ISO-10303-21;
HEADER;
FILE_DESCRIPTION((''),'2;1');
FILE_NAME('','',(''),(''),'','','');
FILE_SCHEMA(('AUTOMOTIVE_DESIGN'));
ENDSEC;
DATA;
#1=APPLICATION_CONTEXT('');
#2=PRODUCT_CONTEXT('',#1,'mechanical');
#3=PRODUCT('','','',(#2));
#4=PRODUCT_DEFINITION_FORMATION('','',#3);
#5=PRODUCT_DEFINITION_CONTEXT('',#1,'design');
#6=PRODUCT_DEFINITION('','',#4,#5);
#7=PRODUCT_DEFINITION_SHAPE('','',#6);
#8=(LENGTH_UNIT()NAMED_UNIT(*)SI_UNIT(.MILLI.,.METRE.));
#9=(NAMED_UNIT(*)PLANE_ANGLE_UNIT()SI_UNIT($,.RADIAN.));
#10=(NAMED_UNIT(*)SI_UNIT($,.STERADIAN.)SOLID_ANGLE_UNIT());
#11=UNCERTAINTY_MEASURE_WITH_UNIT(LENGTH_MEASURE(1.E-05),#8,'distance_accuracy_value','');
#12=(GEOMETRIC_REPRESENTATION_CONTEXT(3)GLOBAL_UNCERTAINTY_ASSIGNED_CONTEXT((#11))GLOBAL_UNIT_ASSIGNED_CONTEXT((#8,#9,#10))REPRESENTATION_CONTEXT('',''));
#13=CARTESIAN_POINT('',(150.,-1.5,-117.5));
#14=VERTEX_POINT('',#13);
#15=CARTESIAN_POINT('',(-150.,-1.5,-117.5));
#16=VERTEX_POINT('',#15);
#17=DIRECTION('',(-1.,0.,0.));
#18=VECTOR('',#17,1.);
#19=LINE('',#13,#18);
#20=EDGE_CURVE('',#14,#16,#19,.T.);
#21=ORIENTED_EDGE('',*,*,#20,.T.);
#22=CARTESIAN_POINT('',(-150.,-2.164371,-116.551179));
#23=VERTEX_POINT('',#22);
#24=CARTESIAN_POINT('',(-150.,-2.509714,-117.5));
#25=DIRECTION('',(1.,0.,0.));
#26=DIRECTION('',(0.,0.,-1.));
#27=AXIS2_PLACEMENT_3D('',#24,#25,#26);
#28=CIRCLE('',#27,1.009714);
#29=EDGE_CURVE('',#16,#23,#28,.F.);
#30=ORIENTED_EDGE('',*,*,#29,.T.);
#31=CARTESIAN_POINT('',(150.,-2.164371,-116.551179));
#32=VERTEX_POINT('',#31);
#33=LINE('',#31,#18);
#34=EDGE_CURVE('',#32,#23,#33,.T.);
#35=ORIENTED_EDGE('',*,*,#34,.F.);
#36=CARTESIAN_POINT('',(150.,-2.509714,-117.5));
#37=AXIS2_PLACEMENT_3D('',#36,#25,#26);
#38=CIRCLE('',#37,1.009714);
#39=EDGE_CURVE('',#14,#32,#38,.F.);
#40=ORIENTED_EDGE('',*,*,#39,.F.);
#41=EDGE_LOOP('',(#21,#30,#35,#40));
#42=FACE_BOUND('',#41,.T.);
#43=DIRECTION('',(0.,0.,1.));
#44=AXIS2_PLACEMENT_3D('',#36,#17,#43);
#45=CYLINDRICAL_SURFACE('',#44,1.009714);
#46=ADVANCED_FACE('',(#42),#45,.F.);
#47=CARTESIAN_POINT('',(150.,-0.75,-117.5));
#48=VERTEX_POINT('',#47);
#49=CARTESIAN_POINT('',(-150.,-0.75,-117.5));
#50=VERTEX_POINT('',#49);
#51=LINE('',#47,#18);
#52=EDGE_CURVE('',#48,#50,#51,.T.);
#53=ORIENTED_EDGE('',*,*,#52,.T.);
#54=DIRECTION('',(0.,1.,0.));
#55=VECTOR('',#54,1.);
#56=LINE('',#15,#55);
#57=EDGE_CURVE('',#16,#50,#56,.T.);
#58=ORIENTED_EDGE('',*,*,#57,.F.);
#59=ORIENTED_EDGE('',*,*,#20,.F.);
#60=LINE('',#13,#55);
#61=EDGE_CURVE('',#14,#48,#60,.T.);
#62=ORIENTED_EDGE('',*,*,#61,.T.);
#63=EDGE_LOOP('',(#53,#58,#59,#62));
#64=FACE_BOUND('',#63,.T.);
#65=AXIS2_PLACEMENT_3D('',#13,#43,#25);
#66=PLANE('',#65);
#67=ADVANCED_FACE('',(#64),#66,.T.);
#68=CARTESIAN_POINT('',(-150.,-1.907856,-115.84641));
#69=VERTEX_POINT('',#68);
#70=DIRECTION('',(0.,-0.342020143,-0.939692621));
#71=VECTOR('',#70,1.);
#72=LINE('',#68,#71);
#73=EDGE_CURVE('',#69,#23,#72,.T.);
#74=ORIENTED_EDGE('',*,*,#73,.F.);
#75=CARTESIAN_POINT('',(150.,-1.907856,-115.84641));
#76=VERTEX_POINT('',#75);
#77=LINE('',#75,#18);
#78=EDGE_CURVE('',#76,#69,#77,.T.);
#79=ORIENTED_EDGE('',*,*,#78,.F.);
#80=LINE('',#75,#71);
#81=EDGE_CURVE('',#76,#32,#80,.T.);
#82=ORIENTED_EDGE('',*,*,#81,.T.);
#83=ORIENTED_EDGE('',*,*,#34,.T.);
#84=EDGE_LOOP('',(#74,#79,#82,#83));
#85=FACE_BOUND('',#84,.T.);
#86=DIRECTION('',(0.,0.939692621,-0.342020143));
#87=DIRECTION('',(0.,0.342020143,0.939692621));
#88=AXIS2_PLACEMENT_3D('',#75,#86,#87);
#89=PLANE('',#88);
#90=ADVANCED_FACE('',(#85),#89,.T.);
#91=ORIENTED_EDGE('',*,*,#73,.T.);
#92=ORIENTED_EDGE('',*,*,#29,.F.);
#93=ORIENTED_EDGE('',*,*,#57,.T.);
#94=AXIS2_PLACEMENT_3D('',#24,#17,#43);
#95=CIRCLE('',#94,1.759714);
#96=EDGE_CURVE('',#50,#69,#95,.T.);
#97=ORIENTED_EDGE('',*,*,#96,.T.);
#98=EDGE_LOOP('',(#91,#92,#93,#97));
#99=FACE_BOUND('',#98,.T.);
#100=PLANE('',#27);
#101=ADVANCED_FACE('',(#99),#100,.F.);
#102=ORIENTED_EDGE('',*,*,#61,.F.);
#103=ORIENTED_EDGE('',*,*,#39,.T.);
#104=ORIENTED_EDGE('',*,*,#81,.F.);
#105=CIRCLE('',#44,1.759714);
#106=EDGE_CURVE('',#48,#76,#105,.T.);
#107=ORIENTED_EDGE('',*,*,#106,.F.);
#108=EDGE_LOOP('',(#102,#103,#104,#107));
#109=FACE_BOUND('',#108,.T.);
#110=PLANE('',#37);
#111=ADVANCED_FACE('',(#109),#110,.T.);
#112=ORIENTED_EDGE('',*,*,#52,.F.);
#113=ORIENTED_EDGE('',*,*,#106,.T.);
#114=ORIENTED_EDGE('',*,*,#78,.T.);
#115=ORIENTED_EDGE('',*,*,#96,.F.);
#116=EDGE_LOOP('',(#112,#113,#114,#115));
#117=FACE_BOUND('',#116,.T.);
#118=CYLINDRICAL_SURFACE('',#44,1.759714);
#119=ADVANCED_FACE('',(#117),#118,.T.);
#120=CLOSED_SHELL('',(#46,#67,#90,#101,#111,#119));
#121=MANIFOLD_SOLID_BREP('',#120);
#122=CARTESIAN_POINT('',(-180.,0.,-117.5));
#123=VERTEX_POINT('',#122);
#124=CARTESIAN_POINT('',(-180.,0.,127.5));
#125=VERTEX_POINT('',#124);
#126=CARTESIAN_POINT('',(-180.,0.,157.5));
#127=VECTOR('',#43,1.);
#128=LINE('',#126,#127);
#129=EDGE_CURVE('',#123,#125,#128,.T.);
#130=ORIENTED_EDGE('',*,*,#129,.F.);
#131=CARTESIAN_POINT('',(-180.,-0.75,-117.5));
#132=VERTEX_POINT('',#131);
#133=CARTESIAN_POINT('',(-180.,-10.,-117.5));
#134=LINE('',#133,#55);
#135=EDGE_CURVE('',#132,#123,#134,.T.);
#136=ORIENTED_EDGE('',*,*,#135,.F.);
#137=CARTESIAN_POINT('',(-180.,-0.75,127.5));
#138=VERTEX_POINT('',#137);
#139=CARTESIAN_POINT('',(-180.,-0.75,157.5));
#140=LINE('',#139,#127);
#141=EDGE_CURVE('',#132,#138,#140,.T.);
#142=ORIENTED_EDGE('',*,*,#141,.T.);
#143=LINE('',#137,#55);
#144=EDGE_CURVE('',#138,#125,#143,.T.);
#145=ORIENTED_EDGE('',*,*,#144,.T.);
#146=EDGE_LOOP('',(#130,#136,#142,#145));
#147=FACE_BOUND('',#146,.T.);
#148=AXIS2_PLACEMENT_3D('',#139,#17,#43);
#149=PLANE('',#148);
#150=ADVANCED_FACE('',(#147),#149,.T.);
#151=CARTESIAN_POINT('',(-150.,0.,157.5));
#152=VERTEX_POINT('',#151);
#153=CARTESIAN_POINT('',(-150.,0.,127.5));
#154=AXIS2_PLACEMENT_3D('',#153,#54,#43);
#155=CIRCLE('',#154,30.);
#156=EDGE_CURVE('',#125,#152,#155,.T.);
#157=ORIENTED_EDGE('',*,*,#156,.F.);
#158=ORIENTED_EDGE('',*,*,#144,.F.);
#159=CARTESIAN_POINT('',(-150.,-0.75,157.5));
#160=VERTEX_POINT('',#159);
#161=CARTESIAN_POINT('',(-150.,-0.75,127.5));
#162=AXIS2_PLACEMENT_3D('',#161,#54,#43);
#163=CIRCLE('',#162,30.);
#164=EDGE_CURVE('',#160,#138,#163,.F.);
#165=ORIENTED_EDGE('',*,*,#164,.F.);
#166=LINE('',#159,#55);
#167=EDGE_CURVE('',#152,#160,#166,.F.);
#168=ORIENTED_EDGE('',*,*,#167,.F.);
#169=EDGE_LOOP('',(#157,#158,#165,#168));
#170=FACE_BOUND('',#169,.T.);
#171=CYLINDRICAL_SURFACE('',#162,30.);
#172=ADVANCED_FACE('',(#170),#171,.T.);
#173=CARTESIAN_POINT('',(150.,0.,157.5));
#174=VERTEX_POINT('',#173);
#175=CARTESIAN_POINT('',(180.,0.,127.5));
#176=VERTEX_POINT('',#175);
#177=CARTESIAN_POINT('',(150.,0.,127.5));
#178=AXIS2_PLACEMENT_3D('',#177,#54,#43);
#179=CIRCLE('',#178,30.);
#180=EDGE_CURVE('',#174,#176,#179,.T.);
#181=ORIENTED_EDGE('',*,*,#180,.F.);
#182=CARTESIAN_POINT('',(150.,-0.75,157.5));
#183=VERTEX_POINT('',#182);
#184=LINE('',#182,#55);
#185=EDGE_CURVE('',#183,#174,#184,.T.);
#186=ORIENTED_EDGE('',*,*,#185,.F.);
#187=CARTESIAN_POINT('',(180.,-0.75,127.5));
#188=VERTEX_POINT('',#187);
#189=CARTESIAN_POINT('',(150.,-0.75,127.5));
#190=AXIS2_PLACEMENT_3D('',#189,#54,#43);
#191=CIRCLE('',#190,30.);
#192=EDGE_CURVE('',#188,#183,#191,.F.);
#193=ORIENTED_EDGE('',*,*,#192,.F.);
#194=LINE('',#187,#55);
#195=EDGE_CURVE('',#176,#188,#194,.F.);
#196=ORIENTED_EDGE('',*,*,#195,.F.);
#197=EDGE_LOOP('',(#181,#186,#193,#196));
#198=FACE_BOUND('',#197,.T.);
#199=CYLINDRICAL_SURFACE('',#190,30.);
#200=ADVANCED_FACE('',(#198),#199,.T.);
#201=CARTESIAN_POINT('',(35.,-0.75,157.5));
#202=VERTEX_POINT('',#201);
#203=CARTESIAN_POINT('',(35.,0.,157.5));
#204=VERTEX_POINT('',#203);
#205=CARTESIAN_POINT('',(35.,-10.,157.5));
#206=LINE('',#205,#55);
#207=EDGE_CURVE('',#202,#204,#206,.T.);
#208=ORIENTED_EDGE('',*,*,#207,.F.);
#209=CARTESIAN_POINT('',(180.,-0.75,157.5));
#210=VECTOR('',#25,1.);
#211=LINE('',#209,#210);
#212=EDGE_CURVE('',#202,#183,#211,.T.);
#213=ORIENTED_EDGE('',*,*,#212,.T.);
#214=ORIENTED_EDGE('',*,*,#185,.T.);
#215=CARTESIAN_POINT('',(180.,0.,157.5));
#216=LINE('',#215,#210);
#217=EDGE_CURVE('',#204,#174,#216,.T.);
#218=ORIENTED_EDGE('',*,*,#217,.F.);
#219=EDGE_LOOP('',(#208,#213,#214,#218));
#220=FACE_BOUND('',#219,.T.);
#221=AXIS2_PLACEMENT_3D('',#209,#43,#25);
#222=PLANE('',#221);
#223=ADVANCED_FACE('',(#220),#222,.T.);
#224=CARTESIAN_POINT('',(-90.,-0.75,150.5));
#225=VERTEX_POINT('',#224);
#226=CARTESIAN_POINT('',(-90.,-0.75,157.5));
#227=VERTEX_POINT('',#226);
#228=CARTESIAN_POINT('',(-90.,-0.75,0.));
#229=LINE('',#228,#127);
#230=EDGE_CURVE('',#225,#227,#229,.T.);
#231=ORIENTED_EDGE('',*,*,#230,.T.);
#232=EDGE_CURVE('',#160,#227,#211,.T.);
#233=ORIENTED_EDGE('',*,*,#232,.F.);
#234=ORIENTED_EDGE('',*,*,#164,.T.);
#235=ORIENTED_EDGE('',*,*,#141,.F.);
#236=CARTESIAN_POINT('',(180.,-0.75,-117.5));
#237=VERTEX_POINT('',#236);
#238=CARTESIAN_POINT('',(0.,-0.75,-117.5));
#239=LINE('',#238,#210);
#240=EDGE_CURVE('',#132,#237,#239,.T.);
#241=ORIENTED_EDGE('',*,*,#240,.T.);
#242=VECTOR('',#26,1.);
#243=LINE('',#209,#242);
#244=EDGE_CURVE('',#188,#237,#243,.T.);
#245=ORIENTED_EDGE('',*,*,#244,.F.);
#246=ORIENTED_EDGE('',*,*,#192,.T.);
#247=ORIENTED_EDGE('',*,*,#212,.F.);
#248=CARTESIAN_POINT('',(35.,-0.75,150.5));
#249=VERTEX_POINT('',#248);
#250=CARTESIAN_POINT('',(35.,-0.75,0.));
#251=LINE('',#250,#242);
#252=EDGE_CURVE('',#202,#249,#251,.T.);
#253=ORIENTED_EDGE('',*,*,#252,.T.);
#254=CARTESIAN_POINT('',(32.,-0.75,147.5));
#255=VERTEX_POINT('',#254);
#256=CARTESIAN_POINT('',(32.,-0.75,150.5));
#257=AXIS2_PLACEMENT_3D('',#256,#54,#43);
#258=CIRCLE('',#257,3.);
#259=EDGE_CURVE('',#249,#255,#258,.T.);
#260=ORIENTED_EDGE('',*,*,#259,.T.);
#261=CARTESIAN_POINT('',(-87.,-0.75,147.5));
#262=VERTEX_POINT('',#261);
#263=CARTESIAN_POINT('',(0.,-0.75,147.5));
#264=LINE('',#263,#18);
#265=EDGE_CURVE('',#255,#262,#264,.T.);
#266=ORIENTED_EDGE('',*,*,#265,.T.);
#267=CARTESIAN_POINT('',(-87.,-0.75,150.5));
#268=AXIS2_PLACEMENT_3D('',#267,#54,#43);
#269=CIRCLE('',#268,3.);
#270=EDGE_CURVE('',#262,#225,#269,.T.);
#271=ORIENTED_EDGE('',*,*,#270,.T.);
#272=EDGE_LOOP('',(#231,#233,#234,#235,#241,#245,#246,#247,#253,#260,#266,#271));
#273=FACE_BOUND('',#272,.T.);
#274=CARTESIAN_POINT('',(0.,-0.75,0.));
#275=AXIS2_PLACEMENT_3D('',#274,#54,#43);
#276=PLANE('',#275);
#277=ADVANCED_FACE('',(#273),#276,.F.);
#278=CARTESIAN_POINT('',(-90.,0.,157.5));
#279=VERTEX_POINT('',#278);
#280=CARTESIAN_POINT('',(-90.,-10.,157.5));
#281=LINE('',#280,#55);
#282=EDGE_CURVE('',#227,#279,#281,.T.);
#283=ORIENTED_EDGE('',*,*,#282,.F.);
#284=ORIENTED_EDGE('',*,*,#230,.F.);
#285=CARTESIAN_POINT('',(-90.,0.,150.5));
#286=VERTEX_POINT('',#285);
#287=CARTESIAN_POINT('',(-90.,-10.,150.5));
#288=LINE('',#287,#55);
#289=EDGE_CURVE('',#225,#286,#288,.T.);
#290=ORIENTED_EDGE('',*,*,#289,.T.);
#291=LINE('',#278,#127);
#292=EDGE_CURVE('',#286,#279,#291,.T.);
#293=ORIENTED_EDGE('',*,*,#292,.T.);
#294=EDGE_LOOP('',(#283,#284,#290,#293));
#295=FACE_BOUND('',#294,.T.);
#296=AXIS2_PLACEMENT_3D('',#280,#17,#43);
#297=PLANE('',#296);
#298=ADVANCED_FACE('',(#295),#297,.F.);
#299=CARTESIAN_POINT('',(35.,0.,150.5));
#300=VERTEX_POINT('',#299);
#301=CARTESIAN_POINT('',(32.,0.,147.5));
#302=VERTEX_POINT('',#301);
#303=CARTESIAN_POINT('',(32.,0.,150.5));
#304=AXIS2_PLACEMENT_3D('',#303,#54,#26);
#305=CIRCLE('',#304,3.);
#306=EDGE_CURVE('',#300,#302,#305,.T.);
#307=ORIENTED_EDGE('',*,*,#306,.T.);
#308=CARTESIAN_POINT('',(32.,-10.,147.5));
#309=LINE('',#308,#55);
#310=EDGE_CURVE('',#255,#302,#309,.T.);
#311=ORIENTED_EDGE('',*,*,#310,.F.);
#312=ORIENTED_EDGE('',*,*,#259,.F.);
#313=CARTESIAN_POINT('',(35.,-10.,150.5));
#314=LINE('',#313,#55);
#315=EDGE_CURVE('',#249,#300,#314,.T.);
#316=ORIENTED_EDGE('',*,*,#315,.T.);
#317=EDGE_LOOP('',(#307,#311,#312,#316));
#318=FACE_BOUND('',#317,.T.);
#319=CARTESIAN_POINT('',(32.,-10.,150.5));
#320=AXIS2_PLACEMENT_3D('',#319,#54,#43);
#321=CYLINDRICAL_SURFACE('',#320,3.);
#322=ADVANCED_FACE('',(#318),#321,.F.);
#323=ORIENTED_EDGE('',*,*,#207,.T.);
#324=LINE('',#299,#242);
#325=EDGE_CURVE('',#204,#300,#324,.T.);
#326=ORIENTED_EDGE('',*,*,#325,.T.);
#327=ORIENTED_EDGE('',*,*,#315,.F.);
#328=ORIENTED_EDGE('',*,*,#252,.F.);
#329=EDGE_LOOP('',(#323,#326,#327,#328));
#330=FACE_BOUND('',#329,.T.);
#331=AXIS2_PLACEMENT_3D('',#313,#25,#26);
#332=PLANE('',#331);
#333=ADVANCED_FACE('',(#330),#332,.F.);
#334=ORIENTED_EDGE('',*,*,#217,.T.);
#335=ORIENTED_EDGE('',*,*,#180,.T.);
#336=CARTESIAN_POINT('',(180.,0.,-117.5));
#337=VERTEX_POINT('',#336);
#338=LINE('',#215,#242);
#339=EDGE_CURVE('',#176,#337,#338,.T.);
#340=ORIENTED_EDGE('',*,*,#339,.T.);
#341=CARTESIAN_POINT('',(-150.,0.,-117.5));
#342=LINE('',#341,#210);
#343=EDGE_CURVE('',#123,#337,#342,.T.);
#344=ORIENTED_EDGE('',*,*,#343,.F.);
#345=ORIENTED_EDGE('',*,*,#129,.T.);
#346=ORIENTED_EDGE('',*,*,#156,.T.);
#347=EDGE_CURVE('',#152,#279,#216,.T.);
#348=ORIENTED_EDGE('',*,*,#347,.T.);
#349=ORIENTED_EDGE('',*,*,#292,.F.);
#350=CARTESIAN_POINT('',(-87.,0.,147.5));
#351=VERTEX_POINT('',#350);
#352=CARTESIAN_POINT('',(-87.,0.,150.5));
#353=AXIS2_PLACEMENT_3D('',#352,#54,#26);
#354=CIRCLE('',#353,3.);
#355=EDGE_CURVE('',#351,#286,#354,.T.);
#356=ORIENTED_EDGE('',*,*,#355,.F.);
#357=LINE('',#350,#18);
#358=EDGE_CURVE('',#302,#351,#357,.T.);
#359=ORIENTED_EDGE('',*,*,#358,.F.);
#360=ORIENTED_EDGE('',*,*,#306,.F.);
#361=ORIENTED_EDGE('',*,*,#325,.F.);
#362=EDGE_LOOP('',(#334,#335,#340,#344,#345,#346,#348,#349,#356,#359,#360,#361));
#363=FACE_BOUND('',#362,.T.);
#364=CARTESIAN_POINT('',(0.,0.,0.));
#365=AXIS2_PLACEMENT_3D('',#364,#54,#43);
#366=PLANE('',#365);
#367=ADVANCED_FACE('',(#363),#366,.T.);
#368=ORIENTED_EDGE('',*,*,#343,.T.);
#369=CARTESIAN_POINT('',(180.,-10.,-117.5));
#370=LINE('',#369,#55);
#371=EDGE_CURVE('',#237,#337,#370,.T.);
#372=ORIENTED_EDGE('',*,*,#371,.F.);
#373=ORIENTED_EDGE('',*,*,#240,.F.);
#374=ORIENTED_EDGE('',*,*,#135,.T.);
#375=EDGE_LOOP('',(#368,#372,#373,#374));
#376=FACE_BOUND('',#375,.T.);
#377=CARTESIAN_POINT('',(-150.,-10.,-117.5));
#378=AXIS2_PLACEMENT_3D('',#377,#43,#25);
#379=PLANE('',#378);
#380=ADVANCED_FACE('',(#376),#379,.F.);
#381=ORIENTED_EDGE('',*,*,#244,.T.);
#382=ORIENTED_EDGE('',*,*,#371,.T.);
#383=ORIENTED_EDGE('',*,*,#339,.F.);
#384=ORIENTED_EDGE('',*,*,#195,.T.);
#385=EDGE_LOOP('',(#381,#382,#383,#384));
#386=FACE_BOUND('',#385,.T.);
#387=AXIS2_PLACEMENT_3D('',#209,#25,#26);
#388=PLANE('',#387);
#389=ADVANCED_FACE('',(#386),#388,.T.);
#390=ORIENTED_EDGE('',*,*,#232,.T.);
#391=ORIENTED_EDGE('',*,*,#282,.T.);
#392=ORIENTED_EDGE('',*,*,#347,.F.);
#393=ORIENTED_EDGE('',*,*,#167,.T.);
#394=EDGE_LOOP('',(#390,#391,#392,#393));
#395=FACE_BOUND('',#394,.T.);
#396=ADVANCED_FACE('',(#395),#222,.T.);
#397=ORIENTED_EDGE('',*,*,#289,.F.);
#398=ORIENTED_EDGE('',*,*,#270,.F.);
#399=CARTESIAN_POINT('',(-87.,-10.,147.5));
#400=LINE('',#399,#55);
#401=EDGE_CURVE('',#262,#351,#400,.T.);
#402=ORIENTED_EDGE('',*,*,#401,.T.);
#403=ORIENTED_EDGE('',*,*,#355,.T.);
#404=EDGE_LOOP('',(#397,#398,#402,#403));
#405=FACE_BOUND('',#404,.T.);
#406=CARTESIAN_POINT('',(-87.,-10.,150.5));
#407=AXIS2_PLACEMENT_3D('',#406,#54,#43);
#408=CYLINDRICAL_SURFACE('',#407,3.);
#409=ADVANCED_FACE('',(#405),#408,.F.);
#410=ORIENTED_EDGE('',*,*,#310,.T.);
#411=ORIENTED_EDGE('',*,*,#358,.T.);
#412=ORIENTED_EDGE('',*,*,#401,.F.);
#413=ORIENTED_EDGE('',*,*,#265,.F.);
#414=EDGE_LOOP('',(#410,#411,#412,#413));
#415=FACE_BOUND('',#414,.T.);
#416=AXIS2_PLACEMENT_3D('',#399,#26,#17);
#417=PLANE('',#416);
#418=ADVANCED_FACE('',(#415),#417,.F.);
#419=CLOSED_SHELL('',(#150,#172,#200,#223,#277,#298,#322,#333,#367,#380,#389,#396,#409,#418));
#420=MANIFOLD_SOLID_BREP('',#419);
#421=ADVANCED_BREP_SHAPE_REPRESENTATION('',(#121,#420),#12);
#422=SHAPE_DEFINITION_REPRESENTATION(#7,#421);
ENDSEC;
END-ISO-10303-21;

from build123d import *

# Parameters (mm, degrees)
SKETCH1_W          = 360
SKETCH1_H          = 315
BASE_FLANGE1_DEPTH = 0.75
FILLET1_R          = 30
SKETCH6_W          = 300
SKETCH6_H          = 40
CUT_EXTRUDE1_DEPTH = 10
CUT_EXTRUDE2_DEPTH = 10
BASE_FLANGE3_DEPTH = 300
CUT_EXTRUDE3_START = -10
CUT_EXTRUDE3_DEPTH = 10
CUT_EXTRUDE4_START = -10
CUT_EXTRUDE4_DEPTH = 10


# Sheet-metal steps are written as plain solids
with BuildPart() as part:
    # Sketch1 → Base-Flange1 (new body)
    with BuildSketch(Plane(origin=(0, 0, 0), x_dir=(1, 0, 0), z_dir=(0, 1, 0))):
        Rectangle(SKETCH1_W, SKETCH1_H)
    extrude(amount=-BASE_FLANGE1_DEPTH)

    # Fillet1
    fillet1_edges = [part.edges().sort_by_distance(p)[0] for p in [
        (-180, -0.375, -157.5),
        (180, -0.375, -157.5),
        (180, -0.375, 157.5),
        (-180, -0.375, 157.5),
    ]]
    fillet(fillet1_edges, radius=FILLET1_R)

    # Sketch6 → Cut-Extrude1 (cut)
    with BuildSketch(Plane(origin=(0, 0, 0), x_dir=(1, 0, 0), z_dir=(0, 1, 0))):
        with Locations((0, 137.5)):
            Rectangle(SKETCH6_W, SKETCH6_H)
    extrude(amount=-CUT_EXTRUDE1_DEPTH, mode=Mode.SUBTRACT)

    # Sketch7 → Cut-Extrude2 (cut)
    with BuildSketch(Plane(origin=(0, 0, 0), x_dir=(1, 0, 0), z_dir=(0, 1, 0))):
        with BuildLine():
            Line((-90, -157.5), (-90, -150.5))
            ThreePointArc((-90, -150.5), (-89.121320344, -148.378679656), (-87, -147.5))
            Line((-87, -147.5), (32, -147.5))
            ThreePointArc((32, -147.5), (34.121320344, -148.378679656), (35, -150.5))
            Line((35, -150.5), (35, -157.5))
            Line((35, -157.5), (-90, -157.5))
        make_face()
    extrude(amount=-CUT_EXTRUDE2_DEPTH, mode=Mode.SUBTRACT)

    # Sketch16 → Cut-Extrude3 (cut)
    with BuildSketch(Plane(origin=(0, 0, 0), x_dir=(1, 0, 0), z_dir=(0, 1, 0)).offset(CUT_EXTRUDE3_START)):
        with BuildLine():
            Line((-150, 157.5), (-150, 117.5))
            Line((-150, 117.5), (-180, 117.5))
            Line((-180, 117.5), (-180, 127.5))
            ThreePointArc((-180, 127.5), (-171.213203436, 148.713203436), (-150, 157.5))
        make_face()
    extrude(amount=CUT_EXTRUDE3_DEPTH, mode=Mode.SUBTRACT)

    # Sketch17 → Cut-Extrude4 (cut)
    with BuildSketch(Plane(origin=(0, 0, 0), x_dir=(1, 0, 0), z_dir=(0, 1, 0)).offset(CUT_EXTRUDE4_START)):
        with BuildLine():
            Line((150, 117.5), (150, 157.5))
            ThreePointArc((150, 157.5), (171.213203436, 148.713203436), (180, 127.5))
            Line((180, 127.5), (180, 117.5))
            Line((180, 117.5), (150, 117.5))
        make_face()
    extrude(amount=CUT_EXTRUDE4_DEPTH, mode=Mode.SUBTRACT)


with BuildPart() as body_2:
    # Sketch13 → Base-Flange3 (new body)
    with BuildSketch(Plane(origin=(-150, 0, 0), x_dir=(0, 0, -1), z_dir=(1, 0, 0))):
        with BuildLine():
            ThreePointArc((117.5, -0.75), (118.509330413, -3.95118709), (115.846409858, -1.907856282))
            Line((115.846409858, -1.907856282), (116.551179324, -2.16437139))
            ThreePointArc((116.551179324, -2.16437139), (118.079148085, -3.336823057), (117.5, -1.5))
            Line((117.5, -1.5), (117.5, -0.75))
        make_face()
    extrude(amount=BASE_FLANGE3_DEPTH)


solid = Compound([part.part, body_2.part])
